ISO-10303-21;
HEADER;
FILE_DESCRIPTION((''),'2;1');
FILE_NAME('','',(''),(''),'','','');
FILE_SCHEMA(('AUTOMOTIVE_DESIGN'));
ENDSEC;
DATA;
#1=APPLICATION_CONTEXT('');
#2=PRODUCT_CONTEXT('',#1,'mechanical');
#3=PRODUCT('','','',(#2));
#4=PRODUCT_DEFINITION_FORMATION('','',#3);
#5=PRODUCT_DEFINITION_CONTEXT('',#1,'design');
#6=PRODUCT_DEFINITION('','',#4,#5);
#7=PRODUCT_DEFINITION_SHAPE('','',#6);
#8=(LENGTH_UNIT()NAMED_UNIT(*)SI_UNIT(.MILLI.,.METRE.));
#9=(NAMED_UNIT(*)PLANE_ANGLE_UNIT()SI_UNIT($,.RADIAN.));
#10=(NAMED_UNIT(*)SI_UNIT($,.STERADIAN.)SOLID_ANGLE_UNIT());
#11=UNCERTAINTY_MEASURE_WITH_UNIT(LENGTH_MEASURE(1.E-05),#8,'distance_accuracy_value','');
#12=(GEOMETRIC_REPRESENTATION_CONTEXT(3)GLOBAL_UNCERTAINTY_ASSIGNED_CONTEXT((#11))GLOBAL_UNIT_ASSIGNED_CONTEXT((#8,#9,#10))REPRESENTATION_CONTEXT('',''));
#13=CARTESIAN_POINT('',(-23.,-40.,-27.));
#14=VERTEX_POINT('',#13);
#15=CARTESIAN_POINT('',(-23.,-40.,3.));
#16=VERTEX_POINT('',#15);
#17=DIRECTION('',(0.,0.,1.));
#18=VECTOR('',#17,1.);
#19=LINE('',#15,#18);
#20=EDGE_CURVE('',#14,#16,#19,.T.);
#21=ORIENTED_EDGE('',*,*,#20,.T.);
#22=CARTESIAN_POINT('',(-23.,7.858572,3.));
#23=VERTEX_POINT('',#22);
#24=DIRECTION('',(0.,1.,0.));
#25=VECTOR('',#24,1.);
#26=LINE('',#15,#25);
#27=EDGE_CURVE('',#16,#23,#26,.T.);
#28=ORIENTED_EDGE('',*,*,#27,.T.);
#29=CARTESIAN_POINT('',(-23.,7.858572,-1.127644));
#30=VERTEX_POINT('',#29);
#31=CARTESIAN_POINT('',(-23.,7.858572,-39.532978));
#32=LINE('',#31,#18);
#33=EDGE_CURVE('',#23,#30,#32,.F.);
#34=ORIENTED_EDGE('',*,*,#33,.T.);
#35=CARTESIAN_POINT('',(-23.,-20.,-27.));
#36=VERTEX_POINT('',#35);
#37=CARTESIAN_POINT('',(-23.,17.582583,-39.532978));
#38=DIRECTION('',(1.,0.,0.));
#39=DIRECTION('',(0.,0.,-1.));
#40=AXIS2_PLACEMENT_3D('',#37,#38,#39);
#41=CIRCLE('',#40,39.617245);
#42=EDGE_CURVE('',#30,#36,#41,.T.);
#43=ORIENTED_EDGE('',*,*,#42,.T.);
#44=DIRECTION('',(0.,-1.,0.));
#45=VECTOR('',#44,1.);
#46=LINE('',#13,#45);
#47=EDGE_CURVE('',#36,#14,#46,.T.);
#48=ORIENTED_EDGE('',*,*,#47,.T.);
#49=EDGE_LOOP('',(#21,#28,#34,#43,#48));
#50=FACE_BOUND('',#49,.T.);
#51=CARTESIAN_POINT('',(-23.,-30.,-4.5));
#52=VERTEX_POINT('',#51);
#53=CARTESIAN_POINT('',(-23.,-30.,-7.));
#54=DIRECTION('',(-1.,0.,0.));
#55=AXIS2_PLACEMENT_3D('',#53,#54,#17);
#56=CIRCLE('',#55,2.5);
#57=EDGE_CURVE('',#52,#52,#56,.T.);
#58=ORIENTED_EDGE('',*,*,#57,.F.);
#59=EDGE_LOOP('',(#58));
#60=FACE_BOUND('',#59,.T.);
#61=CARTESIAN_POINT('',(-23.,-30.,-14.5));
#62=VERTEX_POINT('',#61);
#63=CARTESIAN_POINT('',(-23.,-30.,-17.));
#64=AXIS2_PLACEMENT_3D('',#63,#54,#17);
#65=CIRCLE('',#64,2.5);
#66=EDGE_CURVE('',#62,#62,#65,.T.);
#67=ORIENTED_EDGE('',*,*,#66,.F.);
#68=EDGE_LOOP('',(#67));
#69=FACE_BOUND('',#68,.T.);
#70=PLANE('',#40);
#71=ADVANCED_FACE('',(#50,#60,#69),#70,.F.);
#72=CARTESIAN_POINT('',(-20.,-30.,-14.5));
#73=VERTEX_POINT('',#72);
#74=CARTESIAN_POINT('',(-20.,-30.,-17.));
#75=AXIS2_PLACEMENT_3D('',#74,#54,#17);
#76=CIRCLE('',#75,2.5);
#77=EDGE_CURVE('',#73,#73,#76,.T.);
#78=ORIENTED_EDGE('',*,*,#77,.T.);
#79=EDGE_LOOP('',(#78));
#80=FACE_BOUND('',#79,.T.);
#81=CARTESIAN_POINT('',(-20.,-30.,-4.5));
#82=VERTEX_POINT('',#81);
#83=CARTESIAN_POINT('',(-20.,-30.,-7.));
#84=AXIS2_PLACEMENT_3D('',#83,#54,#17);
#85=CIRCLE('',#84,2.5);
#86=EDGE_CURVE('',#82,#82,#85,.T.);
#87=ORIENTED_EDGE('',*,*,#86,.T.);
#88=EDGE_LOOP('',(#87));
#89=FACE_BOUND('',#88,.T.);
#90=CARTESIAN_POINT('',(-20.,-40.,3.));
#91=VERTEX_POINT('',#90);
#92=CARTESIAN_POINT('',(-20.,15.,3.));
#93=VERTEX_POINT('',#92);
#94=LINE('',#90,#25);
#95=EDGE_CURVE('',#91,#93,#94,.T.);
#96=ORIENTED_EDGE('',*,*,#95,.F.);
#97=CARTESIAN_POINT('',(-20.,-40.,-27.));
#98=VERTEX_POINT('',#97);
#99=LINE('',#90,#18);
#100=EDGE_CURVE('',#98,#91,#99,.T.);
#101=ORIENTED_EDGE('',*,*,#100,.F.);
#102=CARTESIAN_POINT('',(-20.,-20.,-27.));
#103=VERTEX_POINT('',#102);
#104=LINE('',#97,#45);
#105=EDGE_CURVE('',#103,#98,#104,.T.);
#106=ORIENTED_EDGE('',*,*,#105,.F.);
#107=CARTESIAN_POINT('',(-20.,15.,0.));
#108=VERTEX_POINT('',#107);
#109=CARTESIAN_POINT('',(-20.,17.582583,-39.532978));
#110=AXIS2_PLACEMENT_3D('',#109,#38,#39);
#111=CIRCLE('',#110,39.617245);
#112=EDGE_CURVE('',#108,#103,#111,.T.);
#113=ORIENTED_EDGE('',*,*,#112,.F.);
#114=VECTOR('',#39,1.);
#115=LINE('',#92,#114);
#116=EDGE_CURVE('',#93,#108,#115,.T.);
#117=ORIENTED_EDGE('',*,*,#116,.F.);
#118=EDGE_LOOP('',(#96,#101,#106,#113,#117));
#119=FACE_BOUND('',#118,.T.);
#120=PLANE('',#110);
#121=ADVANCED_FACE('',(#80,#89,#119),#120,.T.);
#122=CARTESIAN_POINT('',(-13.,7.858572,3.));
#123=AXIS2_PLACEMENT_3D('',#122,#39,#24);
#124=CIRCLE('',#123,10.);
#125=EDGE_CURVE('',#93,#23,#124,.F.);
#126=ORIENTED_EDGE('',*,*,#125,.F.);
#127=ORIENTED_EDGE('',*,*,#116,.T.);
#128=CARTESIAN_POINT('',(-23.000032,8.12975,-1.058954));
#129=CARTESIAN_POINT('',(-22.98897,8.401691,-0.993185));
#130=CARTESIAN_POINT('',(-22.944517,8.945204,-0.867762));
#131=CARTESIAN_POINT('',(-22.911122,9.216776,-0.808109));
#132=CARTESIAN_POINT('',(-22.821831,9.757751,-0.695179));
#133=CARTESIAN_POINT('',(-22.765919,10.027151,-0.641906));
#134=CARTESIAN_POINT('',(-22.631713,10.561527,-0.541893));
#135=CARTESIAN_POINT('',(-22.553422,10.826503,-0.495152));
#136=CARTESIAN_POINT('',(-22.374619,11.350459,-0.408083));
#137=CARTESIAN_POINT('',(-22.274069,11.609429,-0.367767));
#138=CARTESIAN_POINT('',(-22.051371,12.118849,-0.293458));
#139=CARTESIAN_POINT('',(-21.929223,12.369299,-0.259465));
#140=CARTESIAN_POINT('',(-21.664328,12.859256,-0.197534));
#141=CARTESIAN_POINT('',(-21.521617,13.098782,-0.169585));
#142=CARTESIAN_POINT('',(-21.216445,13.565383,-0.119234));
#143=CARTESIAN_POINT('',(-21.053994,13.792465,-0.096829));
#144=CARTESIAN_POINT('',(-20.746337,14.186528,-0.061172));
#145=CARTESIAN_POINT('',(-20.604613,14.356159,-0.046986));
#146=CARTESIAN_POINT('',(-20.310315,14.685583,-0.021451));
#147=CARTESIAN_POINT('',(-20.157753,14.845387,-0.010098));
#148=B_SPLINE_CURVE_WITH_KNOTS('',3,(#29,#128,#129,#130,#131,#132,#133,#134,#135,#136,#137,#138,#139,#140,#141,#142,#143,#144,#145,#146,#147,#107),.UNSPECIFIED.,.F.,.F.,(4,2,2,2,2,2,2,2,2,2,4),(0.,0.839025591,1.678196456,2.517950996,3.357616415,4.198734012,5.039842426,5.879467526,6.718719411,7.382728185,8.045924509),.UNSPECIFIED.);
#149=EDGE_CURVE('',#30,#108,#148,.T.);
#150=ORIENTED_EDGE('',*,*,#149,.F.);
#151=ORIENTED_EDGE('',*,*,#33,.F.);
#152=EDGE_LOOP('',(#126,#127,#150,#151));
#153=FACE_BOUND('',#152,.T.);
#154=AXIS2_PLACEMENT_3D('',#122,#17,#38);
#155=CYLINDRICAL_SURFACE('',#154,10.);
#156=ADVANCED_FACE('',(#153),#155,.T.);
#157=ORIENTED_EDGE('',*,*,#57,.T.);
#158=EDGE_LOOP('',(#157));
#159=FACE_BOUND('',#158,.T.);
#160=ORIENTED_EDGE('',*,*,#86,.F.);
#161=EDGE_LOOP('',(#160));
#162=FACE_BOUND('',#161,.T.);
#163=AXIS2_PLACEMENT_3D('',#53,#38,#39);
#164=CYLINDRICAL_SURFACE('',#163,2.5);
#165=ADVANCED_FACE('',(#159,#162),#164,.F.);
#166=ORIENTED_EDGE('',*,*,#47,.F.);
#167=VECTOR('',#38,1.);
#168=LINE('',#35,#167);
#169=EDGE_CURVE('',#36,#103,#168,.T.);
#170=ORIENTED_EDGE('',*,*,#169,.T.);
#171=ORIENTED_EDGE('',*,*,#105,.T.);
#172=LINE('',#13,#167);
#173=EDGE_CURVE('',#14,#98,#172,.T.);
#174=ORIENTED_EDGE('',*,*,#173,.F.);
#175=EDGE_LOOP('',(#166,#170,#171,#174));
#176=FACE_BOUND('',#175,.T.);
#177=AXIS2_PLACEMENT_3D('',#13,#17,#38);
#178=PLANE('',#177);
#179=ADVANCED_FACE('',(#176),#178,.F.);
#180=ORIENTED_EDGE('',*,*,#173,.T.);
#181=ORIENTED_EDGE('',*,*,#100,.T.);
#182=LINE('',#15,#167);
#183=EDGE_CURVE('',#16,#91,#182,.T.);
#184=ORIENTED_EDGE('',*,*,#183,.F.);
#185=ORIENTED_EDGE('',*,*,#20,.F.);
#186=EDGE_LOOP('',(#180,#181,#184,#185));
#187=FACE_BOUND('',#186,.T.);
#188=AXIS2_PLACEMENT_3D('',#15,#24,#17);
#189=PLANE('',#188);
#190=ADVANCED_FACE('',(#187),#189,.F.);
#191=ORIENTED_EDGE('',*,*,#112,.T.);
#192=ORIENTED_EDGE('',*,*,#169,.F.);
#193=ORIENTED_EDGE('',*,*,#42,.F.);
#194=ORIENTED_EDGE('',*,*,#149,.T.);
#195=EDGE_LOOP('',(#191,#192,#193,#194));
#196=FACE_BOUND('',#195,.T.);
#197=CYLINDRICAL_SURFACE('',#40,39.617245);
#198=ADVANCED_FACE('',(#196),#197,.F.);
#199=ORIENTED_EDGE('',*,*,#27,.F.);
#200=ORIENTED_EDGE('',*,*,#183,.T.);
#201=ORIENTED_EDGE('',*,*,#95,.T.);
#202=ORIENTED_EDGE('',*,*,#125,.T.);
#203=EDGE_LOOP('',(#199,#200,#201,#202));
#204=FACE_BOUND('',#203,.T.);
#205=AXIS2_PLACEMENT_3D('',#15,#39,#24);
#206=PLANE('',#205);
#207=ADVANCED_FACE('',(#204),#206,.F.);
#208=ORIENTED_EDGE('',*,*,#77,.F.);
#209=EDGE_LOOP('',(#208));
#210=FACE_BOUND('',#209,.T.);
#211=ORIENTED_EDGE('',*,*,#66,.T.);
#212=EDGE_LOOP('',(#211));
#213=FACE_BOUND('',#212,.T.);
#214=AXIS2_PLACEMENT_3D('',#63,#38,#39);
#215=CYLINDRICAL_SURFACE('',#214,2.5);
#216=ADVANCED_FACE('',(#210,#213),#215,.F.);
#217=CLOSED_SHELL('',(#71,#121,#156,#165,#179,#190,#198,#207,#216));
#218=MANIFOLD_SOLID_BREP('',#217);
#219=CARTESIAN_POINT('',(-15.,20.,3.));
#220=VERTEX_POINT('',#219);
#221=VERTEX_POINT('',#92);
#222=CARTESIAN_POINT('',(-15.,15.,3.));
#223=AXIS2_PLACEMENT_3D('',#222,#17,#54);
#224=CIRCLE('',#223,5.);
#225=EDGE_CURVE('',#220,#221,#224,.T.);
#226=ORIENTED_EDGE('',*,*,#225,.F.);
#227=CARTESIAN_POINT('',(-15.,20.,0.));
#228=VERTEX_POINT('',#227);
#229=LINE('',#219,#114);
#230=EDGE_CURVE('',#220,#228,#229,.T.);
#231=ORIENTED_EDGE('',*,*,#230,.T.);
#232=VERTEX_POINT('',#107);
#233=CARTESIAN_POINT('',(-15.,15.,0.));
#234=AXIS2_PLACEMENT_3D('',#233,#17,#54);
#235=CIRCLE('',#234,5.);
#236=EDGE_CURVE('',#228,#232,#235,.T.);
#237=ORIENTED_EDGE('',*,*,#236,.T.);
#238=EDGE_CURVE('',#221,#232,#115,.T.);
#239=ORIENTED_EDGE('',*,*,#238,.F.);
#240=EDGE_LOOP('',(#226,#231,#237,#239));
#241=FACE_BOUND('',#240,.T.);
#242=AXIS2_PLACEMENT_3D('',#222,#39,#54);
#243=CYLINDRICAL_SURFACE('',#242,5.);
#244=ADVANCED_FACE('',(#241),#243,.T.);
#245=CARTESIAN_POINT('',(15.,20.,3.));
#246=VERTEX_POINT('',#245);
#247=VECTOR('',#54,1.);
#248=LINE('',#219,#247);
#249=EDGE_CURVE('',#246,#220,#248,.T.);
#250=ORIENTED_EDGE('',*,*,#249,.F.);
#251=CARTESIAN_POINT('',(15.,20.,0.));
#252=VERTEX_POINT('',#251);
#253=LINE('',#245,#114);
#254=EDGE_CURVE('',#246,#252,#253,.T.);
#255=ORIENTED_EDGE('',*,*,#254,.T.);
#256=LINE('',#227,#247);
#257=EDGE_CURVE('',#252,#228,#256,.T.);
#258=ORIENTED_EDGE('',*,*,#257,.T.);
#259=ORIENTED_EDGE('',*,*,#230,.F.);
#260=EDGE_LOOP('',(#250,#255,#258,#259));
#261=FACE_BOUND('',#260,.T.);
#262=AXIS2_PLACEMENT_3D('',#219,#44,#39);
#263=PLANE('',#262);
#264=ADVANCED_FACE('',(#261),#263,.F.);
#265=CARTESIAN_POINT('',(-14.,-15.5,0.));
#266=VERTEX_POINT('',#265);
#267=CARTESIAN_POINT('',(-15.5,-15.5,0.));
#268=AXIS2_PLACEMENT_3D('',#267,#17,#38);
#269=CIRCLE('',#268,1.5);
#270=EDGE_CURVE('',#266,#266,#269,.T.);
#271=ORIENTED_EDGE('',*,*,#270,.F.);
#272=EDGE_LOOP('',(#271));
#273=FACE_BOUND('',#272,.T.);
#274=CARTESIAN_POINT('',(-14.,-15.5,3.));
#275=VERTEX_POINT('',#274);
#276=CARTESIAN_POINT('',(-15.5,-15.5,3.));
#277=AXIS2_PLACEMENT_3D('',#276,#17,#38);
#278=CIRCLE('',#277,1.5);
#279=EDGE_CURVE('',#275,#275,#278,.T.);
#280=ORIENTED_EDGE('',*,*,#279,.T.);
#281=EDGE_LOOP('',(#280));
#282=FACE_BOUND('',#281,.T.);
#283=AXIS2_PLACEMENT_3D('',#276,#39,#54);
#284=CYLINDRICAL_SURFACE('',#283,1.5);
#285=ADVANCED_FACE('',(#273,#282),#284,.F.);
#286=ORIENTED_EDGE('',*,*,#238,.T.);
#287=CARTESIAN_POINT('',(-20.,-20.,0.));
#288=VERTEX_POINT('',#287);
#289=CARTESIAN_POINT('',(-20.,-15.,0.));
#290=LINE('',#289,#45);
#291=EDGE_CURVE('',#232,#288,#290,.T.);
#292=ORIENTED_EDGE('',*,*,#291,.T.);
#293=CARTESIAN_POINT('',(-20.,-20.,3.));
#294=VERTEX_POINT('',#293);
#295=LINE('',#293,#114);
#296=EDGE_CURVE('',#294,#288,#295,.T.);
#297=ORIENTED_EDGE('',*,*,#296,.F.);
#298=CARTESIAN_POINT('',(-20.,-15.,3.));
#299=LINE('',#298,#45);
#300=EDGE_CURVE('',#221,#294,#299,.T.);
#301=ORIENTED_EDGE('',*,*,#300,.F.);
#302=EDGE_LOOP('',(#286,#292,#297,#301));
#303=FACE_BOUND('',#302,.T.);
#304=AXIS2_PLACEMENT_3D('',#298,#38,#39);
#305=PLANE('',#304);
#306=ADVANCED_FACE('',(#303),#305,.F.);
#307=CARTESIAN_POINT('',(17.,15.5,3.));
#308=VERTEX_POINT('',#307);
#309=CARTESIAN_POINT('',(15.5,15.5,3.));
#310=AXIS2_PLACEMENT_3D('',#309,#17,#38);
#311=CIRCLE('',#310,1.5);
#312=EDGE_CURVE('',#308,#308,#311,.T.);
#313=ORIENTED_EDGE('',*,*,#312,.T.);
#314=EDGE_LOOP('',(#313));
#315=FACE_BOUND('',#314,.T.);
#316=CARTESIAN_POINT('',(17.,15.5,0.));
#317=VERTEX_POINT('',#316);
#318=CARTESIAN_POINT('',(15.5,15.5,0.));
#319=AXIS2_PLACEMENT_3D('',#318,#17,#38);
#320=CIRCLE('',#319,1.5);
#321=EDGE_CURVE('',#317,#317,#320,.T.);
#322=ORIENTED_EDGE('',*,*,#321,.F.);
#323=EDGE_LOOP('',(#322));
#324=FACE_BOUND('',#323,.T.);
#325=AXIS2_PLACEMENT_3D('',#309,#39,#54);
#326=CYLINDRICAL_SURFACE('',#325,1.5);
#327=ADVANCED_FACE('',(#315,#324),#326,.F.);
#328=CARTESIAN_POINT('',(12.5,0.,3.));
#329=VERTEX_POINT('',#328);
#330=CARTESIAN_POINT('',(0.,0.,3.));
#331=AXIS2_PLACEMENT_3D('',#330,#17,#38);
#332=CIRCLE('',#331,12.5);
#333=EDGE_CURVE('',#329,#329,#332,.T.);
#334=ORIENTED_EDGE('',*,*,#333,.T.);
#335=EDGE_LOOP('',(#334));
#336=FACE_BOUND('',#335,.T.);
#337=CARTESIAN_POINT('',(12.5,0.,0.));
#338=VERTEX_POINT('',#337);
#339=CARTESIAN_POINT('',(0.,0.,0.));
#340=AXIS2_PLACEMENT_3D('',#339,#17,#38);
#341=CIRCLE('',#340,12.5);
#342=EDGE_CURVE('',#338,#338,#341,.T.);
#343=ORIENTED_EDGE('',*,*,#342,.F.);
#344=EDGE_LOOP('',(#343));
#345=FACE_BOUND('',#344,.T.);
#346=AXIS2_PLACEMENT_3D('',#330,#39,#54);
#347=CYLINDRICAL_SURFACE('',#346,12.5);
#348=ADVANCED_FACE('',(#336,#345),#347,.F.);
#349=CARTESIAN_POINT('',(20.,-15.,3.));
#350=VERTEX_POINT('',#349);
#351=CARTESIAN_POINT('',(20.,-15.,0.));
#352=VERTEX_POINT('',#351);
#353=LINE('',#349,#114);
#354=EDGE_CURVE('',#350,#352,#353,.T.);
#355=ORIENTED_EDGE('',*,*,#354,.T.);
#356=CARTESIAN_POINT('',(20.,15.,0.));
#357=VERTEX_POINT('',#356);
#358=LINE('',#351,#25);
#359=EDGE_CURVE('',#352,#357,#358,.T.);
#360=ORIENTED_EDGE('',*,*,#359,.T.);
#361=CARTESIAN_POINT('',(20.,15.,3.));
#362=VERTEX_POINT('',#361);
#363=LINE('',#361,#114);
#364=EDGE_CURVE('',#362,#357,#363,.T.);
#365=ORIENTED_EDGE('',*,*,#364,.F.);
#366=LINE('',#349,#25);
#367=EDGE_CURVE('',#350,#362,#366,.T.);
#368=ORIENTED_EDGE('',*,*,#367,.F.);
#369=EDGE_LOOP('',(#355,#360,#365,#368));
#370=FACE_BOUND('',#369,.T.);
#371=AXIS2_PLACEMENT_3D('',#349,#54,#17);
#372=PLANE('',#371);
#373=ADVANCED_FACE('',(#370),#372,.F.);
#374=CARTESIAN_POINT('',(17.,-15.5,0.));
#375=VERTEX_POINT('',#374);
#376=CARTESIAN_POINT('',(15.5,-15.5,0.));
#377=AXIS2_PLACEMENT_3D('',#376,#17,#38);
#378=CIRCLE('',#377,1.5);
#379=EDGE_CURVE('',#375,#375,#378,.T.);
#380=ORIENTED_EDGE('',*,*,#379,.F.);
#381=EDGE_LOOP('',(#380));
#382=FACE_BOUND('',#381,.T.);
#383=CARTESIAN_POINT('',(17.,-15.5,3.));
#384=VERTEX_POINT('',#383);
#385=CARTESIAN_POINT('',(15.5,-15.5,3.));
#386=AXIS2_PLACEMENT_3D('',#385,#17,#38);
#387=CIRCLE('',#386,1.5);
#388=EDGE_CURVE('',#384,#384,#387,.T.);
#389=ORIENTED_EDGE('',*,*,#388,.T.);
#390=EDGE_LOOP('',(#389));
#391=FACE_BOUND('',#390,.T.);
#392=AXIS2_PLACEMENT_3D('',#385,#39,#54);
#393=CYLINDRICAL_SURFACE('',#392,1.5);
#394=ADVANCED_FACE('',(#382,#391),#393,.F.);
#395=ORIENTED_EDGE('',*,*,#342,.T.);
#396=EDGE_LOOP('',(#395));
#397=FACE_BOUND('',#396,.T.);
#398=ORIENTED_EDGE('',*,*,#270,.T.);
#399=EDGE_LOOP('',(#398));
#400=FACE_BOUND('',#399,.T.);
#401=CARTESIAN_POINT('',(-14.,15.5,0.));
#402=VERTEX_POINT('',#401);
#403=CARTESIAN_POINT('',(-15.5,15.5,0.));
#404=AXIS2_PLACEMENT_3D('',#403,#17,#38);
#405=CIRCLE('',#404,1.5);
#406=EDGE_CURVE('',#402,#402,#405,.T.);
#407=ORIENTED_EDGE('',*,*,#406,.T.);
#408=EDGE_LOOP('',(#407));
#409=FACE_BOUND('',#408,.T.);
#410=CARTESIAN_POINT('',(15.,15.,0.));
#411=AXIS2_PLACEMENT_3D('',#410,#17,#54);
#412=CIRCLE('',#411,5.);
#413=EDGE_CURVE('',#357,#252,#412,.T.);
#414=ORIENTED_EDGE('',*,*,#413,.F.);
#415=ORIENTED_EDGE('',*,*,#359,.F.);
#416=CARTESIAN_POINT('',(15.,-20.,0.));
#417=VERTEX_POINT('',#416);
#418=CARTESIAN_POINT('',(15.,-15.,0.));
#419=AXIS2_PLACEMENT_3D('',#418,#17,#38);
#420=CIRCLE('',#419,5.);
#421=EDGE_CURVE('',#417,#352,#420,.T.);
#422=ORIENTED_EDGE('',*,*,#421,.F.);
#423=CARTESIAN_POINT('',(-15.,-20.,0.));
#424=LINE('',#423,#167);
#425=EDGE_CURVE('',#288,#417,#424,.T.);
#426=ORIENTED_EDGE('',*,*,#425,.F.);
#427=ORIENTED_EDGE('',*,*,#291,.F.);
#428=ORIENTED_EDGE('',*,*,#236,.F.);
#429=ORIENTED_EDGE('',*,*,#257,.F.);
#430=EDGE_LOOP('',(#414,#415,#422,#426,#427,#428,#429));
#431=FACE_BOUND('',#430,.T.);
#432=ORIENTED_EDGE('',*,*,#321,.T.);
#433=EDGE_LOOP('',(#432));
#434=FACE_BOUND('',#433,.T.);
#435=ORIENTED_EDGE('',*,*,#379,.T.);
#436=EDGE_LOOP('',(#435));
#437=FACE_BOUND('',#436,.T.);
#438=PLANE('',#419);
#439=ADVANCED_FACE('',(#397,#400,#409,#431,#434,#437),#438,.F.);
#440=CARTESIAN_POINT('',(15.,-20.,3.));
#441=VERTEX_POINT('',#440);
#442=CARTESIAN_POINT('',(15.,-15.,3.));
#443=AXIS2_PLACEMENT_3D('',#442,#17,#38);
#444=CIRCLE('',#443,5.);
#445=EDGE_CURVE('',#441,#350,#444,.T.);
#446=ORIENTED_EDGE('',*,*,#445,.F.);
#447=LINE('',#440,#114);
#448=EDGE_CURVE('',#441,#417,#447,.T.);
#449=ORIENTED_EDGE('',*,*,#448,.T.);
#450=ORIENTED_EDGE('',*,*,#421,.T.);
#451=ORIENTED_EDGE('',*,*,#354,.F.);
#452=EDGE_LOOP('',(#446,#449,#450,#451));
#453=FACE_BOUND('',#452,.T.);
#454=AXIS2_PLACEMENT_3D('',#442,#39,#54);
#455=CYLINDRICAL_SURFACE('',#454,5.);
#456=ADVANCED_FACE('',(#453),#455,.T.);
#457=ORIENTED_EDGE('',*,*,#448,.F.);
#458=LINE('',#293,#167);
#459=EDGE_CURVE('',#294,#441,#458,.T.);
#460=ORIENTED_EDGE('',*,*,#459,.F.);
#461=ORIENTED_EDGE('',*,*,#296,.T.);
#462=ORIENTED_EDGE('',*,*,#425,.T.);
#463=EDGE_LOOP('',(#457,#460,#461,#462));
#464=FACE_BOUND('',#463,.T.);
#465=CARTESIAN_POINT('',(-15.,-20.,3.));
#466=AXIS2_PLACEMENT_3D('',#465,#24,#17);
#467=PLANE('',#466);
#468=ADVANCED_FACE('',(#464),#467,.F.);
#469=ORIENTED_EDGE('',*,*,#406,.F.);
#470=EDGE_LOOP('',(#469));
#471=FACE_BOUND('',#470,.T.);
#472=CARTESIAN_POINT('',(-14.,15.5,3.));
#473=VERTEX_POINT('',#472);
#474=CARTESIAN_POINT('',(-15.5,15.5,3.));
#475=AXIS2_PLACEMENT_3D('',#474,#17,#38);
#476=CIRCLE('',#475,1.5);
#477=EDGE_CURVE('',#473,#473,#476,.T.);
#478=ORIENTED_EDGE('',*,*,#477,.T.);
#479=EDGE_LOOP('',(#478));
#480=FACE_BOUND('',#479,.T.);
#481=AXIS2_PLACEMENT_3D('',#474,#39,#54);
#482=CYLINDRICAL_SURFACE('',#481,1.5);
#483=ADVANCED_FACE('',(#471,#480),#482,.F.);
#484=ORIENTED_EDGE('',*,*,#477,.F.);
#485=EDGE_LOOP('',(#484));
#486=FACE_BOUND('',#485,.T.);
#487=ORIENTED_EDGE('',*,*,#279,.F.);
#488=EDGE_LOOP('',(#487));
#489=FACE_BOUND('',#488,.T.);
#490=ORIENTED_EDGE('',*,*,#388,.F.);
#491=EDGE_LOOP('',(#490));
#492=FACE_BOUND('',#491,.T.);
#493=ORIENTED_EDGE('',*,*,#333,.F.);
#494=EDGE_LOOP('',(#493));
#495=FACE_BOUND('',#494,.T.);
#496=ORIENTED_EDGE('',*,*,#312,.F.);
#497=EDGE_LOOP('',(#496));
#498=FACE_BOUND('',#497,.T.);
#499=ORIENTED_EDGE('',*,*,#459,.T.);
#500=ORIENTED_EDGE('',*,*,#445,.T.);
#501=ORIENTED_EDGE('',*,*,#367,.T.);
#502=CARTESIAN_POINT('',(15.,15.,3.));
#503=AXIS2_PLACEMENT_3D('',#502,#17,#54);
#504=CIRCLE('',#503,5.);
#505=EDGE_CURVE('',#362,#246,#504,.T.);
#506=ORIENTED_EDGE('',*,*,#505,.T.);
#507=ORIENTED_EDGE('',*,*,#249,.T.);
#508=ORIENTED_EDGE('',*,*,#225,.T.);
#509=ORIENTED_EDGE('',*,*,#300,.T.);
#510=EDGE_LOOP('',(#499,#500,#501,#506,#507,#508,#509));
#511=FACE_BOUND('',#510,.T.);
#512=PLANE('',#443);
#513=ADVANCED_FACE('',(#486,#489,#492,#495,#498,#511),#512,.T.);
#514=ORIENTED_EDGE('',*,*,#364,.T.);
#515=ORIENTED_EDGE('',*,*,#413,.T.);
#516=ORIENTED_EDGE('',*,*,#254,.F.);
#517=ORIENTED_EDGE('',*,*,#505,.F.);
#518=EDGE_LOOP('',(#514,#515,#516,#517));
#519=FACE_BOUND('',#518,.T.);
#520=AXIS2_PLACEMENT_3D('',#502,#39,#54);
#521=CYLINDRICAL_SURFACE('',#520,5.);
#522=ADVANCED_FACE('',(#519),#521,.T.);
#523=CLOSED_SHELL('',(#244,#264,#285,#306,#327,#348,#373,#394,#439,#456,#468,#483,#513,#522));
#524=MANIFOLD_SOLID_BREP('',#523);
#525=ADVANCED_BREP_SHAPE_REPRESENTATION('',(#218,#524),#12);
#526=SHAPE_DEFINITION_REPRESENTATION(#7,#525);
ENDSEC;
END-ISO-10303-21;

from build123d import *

# Parameters (mm, degrees)
SKETCH1_R           = 12.5
SKETCH1_R_2         = 1.5
BOSS_EXTRUDE1_DEPTH = 3
SKETCH2_R           = 2.5
BOSS_EXTRUDE2_DEPTH = 3
FILLET1_R           = 10


with BuildPart() as part:
    # Sketch1 → Boss-Extrude1 (new body)
    with BuildSketch(Plane.XY):
        with BuildLine():
            Line((-15, -20), (15, -20))
            ThreePointArc((15, -20), (18.535533906, -18.535533906), (20, -15))
            Line((20, -15), (20, 15))
            ThreePointArc((20, 15), (18.535533906, 18.535533906), (15, 20))
            Line((15, 20), (-15, 20))
            ThreePointArc((-15, 20), (-18.535533906, 18.535533906), (-20, 15))
            Line((-20, 15), (-20, -15))
            Line((-20, -15), (-20, -20))
            Line((-20, -20), (-15, -20))
        make_face()
        Circle(SKETCH1_R, mode=Mode.SUBTRACT)
        with Locations((-15.5, 15.5)):
            Circle(SKETCH1_R_2, mode=Mode.SUBTRACT)
        with Locations((15.5, 15.5)):
            Circle(SKETCH1_R_2, mode=Mode.SUBTRACT)
        with Locations((-15.5, -15.5)):
            Circle(SKETCH1_R_2, mode=Mode.SUBTRACT)
        with Locations((15.5, -15.5)):
            Circle(SKETCH1_R_2, mode=Mode.SUBTRACT)
    extrude(amount=BOSS_EXTRUDE1_DEPTH)


with BuildPart() as body_2:
    # Sketch2 → Boss-Extrude2 (new body)
    with BuildSketch(Plane.ZY.offset(20)):
        with BuildLine():
            Line((3, -40), (-27, -40))
            Line((-27, -40), (-27, -20))
            ThreePointArc((-27, -20), (-8.164746619, -6.615766894), (0, 15))
            Line((0, 15), (3, 15))
            Line((3, 15), (3, -40))
        make_face()
        with Locations((-17, -30)):
            Circle(SKETCH2_R, mode=Mode.SUBTRACT)
        with Locations((-7, -30)):
            Circle(SKETCH2_R, mode=Mode.SUBTRACT)
    extrude(amount=BOSS_EXTRUDE2_DEPTH)

    # Fillet1
    # the kernel refuses this fillet: 10 mm, written as the material it takes off along each edge
    with BuildSketch(Plane(origin=(-23, 15, -17.853571071), x_dir=(1, 0, 0), z_dir=(0, 0, 1))) as fillet1_piece_1:
        with BuildLine():
            CenterArc((10, -7.141428429), FILLET1_R, 134.427004001, 45.572995999)
            Line((0, -7.141428429), (-0.2, -7.141428429))
            Line((-0.2, -7.141428429), (-0.2, 0))
            Line((-0.2, 0), (0, 0.2))
            ThreePointArc((0, 0.2), (1.5, 0.2), (2.86, 0.142828569))
            Line((2.86, 0.142828569), (3, 0))
        make_face()
    extrude(amount=38.707142143, mode=Mode.SUBTRACT)


solid = Compound([part.part, body_2.part])
